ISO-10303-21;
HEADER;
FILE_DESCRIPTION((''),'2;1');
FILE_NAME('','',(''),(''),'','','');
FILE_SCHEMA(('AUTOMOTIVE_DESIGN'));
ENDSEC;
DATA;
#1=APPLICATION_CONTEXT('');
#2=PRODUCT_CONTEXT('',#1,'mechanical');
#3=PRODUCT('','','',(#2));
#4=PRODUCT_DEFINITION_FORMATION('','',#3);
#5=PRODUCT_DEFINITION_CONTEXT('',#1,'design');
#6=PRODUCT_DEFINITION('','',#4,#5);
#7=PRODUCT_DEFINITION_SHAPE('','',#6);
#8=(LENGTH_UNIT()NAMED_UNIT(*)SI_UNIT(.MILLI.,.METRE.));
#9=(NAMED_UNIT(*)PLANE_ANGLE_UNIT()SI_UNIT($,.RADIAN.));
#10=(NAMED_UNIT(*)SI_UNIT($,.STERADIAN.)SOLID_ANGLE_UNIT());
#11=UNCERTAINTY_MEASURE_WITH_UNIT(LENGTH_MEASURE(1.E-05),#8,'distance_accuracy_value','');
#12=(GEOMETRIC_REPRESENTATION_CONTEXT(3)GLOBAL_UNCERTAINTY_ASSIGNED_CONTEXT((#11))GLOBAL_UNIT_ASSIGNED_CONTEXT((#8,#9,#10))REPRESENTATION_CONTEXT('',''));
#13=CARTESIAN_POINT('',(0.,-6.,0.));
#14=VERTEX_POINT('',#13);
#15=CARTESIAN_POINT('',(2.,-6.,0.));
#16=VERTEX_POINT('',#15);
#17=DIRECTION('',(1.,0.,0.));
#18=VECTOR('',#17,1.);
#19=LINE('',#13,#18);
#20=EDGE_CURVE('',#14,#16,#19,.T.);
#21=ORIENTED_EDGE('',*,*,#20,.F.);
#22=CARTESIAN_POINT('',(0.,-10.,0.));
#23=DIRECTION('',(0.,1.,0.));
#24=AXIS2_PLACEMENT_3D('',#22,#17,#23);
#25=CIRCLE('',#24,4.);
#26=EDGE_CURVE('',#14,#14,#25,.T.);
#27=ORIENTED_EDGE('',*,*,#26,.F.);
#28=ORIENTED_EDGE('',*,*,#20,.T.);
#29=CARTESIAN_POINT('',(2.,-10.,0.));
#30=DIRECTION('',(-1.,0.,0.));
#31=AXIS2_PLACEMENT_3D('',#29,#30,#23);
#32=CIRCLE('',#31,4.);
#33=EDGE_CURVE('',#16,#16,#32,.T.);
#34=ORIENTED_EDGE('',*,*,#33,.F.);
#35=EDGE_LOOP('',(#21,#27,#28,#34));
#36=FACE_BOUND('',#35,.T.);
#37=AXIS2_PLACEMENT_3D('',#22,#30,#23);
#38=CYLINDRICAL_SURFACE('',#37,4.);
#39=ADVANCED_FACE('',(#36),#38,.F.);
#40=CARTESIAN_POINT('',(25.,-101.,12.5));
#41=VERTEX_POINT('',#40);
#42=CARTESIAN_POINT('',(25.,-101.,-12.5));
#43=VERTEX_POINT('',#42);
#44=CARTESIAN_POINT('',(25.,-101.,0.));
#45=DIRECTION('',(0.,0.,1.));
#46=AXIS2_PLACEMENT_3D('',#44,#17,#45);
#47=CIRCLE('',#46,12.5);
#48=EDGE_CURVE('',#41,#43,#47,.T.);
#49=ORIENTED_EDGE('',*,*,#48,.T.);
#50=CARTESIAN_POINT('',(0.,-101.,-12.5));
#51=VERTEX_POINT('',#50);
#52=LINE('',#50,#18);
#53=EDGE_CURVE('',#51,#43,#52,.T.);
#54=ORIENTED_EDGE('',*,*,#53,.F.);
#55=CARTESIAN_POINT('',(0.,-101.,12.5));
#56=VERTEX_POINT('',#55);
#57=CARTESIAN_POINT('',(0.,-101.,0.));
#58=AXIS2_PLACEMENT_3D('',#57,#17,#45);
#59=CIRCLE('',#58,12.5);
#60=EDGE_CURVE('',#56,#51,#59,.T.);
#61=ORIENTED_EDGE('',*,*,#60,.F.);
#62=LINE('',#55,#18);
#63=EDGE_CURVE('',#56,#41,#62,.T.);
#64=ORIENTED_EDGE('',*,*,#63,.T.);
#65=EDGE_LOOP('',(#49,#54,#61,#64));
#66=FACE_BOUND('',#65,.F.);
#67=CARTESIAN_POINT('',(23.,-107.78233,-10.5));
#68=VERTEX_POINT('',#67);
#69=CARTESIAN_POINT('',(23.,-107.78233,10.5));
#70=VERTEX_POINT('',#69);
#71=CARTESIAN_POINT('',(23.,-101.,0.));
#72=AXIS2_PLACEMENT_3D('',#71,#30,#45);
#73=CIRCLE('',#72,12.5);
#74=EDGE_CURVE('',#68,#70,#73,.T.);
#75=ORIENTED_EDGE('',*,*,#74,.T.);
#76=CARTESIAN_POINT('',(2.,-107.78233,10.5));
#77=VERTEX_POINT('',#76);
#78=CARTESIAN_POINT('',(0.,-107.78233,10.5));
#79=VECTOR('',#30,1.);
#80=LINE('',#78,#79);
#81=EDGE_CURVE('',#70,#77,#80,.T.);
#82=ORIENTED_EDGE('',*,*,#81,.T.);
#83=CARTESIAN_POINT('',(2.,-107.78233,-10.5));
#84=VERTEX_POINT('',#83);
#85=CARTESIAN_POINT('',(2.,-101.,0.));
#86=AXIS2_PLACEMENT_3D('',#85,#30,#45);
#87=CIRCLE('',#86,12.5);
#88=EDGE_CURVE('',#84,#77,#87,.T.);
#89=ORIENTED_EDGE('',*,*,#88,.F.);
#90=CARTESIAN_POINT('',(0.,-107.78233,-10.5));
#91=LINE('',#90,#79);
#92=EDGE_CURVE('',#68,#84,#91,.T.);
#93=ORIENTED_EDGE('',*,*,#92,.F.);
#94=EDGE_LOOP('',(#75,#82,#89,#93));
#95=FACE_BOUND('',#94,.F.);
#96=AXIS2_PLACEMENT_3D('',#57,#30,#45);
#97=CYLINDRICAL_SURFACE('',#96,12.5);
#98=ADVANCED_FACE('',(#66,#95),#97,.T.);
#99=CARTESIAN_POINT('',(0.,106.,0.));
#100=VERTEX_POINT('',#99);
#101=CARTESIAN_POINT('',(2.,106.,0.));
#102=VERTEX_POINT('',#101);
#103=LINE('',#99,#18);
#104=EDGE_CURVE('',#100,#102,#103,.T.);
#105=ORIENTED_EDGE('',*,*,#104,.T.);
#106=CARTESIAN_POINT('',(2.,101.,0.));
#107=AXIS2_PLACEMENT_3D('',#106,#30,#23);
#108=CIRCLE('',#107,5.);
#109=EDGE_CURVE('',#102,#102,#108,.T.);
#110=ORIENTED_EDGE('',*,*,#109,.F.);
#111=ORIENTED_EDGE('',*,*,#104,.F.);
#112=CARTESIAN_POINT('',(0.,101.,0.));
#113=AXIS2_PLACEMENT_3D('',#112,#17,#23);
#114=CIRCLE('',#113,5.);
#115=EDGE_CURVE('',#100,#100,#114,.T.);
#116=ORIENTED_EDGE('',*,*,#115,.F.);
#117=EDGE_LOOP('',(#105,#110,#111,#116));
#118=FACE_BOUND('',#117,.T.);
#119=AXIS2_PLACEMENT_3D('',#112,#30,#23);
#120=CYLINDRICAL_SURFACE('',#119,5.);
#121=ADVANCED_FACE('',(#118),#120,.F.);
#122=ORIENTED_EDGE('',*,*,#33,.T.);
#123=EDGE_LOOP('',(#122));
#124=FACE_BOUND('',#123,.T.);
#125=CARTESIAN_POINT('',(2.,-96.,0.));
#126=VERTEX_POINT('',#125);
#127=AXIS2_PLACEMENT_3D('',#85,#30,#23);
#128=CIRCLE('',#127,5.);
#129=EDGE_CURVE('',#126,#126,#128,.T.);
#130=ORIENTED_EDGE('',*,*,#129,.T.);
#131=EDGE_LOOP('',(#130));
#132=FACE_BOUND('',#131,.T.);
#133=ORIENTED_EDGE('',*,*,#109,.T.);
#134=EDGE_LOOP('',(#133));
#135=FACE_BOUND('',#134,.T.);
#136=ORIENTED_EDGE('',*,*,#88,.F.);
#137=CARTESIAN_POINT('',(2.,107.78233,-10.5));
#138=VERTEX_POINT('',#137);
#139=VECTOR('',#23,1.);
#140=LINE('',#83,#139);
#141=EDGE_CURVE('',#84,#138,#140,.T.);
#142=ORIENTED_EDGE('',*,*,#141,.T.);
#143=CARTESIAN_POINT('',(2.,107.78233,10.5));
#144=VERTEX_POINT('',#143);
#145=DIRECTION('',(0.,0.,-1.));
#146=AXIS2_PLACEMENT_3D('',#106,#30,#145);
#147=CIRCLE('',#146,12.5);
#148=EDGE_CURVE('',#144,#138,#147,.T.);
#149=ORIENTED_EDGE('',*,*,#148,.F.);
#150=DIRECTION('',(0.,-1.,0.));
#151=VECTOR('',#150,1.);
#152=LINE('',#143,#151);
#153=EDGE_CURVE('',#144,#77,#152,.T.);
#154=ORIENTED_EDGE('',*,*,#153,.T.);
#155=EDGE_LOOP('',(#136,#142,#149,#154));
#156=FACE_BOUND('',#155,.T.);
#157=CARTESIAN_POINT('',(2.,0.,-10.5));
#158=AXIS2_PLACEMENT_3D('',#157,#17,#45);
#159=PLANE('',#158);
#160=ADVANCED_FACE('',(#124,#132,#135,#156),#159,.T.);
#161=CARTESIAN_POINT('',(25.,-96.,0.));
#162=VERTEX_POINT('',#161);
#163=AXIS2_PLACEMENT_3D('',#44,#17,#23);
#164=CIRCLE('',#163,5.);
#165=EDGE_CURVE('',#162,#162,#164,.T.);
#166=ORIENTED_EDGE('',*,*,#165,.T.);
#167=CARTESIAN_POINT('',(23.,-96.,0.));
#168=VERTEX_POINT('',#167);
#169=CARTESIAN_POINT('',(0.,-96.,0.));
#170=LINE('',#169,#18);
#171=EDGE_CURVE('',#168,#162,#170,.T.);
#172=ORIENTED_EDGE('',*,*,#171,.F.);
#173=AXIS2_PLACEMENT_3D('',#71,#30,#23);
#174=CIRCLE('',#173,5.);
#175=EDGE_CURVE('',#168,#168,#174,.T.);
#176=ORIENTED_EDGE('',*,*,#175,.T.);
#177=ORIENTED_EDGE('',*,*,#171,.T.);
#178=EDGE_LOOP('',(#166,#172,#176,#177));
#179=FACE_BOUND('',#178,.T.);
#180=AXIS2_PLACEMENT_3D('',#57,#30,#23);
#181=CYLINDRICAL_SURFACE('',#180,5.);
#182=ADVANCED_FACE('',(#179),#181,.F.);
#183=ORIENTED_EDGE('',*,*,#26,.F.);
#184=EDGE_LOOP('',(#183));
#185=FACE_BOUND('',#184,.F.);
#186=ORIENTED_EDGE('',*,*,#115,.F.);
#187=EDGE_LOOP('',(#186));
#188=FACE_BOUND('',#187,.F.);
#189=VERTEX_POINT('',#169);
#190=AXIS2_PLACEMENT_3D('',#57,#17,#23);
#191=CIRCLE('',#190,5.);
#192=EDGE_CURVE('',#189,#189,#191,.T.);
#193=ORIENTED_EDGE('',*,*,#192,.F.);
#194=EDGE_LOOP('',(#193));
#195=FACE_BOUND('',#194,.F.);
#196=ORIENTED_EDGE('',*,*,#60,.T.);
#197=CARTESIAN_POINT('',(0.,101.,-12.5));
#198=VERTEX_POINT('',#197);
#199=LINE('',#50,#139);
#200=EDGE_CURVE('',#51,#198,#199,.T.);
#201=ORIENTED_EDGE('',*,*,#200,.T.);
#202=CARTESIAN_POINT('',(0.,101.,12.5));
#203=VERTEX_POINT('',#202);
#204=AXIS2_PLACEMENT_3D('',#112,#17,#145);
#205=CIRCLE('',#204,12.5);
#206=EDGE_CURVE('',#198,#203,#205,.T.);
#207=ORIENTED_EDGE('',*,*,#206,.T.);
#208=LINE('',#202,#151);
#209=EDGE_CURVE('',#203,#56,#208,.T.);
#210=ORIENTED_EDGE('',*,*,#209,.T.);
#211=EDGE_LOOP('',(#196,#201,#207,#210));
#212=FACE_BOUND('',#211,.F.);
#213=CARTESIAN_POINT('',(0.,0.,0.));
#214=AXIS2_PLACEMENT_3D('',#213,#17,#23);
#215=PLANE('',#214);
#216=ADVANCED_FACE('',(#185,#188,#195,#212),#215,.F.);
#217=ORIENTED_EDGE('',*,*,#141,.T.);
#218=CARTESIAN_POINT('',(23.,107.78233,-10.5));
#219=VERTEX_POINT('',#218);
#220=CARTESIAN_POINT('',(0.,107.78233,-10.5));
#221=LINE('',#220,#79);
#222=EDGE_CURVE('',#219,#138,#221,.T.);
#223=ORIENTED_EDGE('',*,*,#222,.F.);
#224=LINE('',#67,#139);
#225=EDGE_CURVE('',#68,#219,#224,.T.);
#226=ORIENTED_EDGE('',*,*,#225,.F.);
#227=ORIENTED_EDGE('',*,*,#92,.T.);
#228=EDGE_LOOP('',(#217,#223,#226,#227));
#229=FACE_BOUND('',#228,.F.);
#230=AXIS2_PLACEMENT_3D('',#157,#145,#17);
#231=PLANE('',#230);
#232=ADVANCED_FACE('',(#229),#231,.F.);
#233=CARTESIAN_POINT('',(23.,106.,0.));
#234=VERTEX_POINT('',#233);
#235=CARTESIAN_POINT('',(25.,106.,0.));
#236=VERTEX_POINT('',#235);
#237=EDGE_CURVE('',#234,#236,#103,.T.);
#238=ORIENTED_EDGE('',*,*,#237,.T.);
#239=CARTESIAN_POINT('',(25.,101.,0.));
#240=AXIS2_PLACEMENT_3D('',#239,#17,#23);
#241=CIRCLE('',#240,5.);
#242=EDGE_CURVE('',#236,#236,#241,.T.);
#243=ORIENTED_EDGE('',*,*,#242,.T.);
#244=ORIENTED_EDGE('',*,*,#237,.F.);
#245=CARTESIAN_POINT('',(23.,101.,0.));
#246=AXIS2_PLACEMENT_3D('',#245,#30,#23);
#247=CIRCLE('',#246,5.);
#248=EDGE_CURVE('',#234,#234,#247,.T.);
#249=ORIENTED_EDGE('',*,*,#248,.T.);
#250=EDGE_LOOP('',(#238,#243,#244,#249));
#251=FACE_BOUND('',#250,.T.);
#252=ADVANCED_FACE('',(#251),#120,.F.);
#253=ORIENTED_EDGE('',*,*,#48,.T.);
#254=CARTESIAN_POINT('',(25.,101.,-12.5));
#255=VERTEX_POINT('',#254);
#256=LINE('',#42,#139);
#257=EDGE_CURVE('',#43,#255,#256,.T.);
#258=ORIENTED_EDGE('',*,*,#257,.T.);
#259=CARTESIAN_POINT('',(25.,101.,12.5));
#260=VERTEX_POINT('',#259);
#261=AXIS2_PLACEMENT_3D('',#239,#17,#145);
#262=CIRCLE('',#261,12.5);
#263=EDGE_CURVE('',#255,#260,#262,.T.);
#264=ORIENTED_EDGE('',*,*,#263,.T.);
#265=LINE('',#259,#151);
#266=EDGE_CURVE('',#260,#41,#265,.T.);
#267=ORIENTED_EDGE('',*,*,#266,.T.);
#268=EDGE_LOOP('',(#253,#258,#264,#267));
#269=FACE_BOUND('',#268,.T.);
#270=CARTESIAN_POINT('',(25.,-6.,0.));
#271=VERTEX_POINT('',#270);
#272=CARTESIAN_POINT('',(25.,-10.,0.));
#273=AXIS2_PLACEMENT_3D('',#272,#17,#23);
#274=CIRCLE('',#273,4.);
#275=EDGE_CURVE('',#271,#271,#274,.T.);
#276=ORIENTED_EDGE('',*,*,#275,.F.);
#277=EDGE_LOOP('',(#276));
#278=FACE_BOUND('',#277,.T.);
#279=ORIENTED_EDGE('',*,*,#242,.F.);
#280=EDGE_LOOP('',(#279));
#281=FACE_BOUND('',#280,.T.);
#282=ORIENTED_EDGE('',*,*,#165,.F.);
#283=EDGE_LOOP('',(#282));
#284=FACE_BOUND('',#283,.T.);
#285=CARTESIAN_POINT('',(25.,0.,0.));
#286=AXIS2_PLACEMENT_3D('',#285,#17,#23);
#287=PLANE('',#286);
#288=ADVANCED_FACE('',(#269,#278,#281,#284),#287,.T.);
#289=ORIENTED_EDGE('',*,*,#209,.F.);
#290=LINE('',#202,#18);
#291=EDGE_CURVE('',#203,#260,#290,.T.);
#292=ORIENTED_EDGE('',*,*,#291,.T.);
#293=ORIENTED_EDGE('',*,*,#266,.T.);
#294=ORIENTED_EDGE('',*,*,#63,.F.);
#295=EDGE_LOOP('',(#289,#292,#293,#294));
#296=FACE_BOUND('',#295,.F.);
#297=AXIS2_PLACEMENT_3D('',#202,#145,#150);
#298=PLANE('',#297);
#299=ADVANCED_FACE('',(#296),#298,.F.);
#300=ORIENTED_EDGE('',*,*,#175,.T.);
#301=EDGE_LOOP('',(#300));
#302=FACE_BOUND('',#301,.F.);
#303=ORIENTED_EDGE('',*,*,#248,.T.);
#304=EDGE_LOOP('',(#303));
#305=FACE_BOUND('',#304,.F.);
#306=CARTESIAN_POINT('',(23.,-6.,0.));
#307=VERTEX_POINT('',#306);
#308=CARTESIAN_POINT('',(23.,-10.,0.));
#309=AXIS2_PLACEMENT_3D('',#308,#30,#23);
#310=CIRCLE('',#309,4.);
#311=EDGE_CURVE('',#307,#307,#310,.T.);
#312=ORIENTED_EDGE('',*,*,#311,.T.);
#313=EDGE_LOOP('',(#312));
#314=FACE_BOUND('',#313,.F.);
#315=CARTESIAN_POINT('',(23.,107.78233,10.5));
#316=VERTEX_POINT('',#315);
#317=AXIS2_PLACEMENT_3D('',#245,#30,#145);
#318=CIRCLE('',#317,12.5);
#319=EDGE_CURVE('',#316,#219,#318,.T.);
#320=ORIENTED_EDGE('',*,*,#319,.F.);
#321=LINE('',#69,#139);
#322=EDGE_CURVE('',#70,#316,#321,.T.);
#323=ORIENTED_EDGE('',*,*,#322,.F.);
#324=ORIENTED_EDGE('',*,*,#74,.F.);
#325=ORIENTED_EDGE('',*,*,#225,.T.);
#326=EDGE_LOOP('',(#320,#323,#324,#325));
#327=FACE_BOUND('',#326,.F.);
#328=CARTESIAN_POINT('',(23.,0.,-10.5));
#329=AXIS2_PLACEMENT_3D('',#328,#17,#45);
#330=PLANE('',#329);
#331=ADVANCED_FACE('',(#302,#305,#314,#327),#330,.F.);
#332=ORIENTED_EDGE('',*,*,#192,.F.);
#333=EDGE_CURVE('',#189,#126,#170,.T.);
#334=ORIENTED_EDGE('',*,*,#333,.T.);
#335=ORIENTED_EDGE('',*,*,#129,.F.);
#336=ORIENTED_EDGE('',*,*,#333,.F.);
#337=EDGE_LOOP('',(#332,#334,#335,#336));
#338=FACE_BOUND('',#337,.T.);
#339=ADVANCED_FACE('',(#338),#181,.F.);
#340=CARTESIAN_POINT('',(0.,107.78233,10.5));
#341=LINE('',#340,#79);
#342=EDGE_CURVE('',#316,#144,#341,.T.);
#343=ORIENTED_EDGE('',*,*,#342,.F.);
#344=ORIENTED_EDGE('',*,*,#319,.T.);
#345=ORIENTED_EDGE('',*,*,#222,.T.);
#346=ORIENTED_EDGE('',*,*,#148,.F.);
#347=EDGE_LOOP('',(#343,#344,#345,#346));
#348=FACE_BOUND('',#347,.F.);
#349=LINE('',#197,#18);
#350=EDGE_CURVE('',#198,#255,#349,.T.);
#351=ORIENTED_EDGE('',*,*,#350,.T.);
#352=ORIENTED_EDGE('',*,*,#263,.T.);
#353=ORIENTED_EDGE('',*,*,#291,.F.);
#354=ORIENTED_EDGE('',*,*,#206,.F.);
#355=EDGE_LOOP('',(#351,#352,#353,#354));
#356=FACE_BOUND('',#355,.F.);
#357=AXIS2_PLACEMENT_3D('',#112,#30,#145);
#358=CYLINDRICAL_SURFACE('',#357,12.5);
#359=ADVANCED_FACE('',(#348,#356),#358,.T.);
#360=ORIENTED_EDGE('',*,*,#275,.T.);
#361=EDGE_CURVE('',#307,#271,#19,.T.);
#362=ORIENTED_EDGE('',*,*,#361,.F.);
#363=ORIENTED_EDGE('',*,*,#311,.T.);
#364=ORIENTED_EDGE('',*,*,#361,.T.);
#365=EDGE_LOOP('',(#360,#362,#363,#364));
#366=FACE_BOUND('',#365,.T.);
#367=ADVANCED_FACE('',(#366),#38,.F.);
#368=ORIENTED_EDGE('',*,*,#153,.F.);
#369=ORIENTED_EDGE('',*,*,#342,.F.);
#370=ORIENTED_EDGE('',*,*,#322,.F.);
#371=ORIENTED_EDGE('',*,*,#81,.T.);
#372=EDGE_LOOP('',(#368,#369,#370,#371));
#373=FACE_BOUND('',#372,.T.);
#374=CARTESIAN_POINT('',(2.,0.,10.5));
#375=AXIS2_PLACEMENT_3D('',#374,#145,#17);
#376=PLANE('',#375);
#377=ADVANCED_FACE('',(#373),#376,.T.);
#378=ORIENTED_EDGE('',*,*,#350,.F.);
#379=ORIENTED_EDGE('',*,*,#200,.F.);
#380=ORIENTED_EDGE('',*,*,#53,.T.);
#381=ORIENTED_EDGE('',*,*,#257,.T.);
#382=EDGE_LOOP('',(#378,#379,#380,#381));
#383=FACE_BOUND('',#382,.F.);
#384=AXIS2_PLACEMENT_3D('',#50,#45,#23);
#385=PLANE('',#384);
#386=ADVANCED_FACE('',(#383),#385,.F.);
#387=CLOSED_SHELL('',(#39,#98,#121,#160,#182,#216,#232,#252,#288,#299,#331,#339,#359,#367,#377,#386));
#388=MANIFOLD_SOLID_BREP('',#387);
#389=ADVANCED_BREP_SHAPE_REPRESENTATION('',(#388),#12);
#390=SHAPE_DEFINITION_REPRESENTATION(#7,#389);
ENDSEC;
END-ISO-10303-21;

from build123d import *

# Parameters (mm, degrees)
F0_R          = 5
F0_R_2        = 4
F1_DEPTH      = 25
F2_W          = 21
F2_H          = 21
F3_DEPTH      = 113.501
F3_DEPTH_BACK = 113.501


with BuildPart() as f1:
    # F0 (on Right) → F1 (new body)
    with BuildSketch(Plane.YZ):
        with BuildLine():
            ThreePointArc((101, -12.5), (113.5, 0), (101, 12.5))
            Line((101, 12.5), (-101, 12.5))
            ThreePointArc((-101, 12.5), (-113.5, 0), (-101, -12.5))
            Line((-101, -12.5), (101, -12.5))
        make_face()
        with Locations((-101, 0)):
            Circle(F0_R, mode=Mode.SUBTRACT)
        with Locations((-10, 0)):
            Circle(F0_R_2, mode=Mode.SUBTRACT)
        with Locations((101, 0)):
            Circle(F0_R, mode=Mode.SUBTRACT)
    extrude(amount=F1_DEPTH)

    # F2 (on Front) → F3 (cut, two sides)
    with BuildSketch(Plane.XZ) as f3_sk:
        with Locations((12.5, 0)):
            Rectangle(F2_W, F2_H)
    extrude(amount=-F3_DEPTH, mode=Mode.SUBTRACT)
    extrude(f3_sk.sketch, amount=F3_DEPTH_BACK, mode=Mode.SUBTRACT)


solid = f1.part
